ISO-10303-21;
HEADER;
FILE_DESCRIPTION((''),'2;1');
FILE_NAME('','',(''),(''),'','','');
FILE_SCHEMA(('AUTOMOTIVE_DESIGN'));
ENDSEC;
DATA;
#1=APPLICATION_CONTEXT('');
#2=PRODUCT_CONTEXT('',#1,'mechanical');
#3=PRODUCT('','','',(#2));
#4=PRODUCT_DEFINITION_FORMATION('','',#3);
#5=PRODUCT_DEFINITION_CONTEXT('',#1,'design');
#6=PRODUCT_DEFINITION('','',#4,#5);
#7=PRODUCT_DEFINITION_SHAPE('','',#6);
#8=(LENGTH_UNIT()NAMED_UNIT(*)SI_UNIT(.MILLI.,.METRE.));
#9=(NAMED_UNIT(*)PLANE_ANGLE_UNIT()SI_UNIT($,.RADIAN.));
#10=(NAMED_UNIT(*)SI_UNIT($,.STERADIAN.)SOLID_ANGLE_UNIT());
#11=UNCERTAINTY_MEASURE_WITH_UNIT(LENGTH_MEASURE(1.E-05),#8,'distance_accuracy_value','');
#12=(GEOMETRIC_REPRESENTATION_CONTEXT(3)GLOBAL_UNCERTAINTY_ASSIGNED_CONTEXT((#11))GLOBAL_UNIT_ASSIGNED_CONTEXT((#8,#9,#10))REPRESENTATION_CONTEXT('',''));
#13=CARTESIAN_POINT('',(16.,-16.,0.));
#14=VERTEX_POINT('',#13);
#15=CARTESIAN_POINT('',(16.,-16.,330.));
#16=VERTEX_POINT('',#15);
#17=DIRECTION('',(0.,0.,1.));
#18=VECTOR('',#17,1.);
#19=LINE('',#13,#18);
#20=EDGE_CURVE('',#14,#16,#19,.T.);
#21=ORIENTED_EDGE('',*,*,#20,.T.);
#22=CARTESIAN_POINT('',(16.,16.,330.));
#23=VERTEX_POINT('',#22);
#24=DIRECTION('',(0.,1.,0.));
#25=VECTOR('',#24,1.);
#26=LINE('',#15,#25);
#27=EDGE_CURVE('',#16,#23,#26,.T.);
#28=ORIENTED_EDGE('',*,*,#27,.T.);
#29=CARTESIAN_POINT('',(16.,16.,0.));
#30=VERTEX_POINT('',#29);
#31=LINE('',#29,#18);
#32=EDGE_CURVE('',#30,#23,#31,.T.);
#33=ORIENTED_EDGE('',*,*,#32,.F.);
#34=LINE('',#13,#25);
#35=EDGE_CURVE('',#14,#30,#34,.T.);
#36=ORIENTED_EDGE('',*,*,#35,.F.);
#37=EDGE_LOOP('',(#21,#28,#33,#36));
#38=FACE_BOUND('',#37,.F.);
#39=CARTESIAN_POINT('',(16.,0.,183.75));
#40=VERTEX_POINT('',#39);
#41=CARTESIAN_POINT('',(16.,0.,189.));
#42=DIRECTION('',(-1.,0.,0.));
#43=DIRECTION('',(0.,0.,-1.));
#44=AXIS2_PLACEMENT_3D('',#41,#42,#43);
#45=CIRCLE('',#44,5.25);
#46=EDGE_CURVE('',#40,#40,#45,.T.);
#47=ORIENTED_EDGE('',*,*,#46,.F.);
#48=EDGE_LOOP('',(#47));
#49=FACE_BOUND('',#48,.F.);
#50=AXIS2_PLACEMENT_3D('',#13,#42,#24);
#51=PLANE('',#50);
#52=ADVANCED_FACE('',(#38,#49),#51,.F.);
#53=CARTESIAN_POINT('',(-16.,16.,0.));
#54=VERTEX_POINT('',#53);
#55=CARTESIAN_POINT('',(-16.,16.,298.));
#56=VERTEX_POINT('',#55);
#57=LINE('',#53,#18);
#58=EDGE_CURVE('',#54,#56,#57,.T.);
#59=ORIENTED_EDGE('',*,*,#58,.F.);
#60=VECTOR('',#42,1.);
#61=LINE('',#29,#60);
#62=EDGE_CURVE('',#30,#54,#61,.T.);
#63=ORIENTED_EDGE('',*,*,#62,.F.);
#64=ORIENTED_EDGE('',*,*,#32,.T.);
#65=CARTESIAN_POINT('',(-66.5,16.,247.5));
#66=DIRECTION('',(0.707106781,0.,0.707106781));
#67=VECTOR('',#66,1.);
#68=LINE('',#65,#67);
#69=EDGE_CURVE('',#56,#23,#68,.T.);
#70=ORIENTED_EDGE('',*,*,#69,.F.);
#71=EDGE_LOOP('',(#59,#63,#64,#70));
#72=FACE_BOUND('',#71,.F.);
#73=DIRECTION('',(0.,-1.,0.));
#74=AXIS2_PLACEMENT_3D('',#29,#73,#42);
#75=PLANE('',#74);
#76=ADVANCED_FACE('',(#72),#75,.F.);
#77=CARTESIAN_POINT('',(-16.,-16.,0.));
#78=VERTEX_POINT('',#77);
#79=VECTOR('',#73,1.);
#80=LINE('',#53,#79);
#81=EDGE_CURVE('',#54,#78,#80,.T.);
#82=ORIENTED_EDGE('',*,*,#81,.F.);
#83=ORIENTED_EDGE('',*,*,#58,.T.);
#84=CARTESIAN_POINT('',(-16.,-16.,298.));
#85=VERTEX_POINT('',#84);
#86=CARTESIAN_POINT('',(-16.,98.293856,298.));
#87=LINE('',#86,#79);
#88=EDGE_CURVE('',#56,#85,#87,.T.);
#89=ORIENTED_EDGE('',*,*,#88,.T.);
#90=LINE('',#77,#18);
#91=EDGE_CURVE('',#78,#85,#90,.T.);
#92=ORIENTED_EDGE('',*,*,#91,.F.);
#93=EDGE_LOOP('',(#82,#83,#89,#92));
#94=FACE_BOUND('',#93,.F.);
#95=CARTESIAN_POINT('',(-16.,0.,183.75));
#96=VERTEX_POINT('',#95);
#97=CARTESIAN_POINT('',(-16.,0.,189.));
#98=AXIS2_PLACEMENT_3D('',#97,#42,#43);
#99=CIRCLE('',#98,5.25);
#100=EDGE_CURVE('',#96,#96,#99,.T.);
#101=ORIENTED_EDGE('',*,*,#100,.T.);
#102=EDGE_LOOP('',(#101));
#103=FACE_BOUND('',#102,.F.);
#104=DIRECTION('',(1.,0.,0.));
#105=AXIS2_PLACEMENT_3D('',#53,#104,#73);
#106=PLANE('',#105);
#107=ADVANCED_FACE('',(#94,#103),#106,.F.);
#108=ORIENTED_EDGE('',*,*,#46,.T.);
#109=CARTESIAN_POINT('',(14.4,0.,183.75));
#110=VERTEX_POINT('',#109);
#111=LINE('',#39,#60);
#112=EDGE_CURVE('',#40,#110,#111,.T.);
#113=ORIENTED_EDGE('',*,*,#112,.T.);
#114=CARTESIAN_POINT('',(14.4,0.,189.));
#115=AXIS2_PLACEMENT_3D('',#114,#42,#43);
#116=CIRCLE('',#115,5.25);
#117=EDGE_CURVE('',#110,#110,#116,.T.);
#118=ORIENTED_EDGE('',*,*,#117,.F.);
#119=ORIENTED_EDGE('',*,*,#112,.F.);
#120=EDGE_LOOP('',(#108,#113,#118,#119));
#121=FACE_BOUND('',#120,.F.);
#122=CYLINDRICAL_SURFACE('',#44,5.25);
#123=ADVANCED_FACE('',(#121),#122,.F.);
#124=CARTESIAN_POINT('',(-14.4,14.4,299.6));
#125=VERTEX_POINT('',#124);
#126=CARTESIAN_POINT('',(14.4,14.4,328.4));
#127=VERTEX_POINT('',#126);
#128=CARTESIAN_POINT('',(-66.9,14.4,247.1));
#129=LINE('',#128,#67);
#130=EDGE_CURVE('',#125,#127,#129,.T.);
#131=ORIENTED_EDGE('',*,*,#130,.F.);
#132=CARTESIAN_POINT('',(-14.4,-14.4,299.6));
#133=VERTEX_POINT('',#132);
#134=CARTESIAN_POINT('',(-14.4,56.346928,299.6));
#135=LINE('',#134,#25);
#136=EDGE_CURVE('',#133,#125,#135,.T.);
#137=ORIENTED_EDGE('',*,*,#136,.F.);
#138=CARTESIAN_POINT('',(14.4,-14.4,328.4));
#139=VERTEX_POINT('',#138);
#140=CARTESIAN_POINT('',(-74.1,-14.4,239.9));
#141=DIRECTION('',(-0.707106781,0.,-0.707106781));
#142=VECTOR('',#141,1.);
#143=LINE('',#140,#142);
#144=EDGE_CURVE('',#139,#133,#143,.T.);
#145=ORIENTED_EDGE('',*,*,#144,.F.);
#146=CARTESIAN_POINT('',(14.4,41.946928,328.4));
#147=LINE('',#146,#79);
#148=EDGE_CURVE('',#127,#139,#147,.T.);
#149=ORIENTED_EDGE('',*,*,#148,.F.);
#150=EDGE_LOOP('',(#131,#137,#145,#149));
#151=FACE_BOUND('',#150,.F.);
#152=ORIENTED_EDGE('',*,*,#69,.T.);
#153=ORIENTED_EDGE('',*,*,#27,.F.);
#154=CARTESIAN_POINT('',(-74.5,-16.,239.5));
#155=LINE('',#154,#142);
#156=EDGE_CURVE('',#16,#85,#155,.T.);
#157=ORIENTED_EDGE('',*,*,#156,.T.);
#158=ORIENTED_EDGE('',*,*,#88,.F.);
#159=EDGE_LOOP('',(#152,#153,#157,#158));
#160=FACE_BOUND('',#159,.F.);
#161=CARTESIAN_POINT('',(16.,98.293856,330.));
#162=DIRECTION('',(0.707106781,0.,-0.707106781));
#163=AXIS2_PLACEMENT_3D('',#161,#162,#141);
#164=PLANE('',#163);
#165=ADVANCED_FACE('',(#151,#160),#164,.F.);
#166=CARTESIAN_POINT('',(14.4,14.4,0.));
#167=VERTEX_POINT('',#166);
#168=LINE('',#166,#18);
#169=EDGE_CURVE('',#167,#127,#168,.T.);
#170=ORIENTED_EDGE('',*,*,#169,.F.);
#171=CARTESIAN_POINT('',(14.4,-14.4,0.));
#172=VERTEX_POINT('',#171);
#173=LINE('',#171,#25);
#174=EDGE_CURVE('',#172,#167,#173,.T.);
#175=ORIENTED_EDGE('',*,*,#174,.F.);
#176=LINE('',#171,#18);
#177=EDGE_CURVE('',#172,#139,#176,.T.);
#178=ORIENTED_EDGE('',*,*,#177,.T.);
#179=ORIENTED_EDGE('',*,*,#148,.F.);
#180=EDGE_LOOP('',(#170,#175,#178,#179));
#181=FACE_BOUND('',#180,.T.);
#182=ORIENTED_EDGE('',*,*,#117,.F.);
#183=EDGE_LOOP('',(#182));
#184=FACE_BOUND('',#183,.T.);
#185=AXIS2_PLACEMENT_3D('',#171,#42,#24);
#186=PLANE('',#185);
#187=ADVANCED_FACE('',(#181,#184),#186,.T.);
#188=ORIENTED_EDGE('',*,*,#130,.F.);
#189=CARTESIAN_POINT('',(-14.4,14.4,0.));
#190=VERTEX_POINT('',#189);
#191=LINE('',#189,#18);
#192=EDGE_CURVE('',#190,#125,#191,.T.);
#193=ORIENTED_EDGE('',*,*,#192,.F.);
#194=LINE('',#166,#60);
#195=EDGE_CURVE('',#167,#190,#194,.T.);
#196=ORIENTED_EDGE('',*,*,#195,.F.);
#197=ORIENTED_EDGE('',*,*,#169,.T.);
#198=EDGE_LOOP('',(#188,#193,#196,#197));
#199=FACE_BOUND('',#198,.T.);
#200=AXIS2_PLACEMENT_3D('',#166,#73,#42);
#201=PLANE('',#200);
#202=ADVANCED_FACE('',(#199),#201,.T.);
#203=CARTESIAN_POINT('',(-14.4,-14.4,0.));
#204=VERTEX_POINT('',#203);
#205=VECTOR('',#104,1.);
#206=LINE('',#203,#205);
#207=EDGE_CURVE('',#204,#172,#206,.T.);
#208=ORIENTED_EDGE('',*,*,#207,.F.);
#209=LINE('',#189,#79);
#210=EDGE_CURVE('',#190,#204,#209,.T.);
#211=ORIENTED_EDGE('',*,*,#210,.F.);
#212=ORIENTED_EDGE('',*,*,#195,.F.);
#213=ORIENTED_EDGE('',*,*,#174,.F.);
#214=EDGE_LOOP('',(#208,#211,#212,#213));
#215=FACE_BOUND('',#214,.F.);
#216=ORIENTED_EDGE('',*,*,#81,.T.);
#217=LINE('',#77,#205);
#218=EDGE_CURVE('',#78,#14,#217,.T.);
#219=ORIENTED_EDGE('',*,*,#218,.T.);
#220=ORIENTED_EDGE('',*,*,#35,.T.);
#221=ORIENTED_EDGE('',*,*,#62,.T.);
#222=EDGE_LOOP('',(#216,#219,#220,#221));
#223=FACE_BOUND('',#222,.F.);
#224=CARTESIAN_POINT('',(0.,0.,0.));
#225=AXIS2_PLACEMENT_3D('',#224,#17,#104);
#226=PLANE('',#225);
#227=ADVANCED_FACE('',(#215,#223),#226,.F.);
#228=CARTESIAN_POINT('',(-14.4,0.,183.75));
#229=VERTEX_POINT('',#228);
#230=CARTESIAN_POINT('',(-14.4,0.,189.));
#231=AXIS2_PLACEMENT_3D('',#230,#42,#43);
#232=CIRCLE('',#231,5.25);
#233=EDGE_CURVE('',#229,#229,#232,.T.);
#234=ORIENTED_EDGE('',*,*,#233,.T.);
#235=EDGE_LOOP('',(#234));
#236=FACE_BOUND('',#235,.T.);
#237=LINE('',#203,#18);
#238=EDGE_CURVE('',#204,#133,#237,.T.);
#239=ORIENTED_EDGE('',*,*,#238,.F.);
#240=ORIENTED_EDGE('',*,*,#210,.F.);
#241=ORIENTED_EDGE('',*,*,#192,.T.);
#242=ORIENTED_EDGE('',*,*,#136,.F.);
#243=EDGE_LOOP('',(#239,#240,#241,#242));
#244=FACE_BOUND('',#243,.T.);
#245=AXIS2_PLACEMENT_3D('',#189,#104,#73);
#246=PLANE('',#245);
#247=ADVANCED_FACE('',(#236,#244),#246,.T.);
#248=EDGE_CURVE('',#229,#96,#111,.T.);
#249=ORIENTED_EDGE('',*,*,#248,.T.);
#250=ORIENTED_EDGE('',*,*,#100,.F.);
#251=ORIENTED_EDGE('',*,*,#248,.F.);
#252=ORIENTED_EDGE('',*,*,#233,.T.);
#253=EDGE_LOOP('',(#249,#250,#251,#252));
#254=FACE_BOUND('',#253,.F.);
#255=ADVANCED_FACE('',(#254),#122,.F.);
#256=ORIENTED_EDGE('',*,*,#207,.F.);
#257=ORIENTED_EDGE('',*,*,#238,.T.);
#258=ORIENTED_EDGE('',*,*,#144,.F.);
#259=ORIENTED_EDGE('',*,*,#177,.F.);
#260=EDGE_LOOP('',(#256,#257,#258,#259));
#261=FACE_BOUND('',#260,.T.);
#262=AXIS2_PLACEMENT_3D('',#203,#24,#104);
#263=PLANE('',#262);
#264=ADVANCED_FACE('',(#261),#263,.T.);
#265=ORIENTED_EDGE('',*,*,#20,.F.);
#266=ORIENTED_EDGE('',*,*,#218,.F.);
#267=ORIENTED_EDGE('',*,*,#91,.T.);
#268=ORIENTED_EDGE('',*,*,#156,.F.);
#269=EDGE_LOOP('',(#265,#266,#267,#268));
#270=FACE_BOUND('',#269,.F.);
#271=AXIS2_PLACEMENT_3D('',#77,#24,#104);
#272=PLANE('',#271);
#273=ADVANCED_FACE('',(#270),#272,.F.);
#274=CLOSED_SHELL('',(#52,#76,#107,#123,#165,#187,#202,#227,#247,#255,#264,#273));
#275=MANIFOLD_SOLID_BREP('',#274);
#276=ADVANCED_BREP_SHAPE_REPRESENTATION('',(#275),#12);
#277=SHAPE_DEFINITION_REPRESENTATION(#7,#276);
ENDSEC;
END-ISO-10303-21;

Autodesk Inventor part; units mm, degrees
ref_plane "YZ Plane" through (0, 0, 0) normal (1, 0, 0) x (0, 1, 0)
ref_plane "XZ Plane" through (0, 0, 0) normal (0, 1, 0) x (-1, 0, 0)
ref_plane "XY Plane" through (0, 0, 0) normal (0, 0, 1) x (1, 0, 0)
sketch "スケッチ1" plane through (0, 0, 0) normal (0, 0, 1) x (1, 0, 0)
  line L0 (16, 16) -> (-16, 16)
  line L1 (-16, 16) -> (-16, -16)
  line L2 (-16, -16) -> (16, -16)
  line L3 (16, -16) -> (16, 16)
  line L4 (14.4, 14.4) -> (-14.4, 14.4)
  line L5 (-14.4, 14.4) -> (-14.4, -14.4)
  line L6 (-14.4, -14.4) -> (14.4, -14.4)
  line L7 (14.4, -14.4) -> (14.4, 14.4)
  point P0 (0, 0)
  dimension "d6" = 32
  dimension "d7" = 32
  dimension "d8" = 1.6
  dimension "d24" = 16
  dimension "d26" = 16
extrude "押し出し3" add sketch "スケッチ1" along normal blind 330
sketch "スケッチ7" plane through (16, -16, 0) normal (1, 0, 0) x (0, 0, -1)
  line L0 (0, 0) -> (0, 32) projected
  line L1 (0, 0) -> (-330, 0) projected
  point P0 (0, 16)
  point P1 (-189, 16)
  dimension "d15" = 189
  dimension "d16" = 16
hole "穴1" at (16, 0, 189) direction (-1, 0, 0) diameter 10.5 end through all
chamfer "面取り2" distance 32 angle 45 1 edges at (-16, 0, 330)
